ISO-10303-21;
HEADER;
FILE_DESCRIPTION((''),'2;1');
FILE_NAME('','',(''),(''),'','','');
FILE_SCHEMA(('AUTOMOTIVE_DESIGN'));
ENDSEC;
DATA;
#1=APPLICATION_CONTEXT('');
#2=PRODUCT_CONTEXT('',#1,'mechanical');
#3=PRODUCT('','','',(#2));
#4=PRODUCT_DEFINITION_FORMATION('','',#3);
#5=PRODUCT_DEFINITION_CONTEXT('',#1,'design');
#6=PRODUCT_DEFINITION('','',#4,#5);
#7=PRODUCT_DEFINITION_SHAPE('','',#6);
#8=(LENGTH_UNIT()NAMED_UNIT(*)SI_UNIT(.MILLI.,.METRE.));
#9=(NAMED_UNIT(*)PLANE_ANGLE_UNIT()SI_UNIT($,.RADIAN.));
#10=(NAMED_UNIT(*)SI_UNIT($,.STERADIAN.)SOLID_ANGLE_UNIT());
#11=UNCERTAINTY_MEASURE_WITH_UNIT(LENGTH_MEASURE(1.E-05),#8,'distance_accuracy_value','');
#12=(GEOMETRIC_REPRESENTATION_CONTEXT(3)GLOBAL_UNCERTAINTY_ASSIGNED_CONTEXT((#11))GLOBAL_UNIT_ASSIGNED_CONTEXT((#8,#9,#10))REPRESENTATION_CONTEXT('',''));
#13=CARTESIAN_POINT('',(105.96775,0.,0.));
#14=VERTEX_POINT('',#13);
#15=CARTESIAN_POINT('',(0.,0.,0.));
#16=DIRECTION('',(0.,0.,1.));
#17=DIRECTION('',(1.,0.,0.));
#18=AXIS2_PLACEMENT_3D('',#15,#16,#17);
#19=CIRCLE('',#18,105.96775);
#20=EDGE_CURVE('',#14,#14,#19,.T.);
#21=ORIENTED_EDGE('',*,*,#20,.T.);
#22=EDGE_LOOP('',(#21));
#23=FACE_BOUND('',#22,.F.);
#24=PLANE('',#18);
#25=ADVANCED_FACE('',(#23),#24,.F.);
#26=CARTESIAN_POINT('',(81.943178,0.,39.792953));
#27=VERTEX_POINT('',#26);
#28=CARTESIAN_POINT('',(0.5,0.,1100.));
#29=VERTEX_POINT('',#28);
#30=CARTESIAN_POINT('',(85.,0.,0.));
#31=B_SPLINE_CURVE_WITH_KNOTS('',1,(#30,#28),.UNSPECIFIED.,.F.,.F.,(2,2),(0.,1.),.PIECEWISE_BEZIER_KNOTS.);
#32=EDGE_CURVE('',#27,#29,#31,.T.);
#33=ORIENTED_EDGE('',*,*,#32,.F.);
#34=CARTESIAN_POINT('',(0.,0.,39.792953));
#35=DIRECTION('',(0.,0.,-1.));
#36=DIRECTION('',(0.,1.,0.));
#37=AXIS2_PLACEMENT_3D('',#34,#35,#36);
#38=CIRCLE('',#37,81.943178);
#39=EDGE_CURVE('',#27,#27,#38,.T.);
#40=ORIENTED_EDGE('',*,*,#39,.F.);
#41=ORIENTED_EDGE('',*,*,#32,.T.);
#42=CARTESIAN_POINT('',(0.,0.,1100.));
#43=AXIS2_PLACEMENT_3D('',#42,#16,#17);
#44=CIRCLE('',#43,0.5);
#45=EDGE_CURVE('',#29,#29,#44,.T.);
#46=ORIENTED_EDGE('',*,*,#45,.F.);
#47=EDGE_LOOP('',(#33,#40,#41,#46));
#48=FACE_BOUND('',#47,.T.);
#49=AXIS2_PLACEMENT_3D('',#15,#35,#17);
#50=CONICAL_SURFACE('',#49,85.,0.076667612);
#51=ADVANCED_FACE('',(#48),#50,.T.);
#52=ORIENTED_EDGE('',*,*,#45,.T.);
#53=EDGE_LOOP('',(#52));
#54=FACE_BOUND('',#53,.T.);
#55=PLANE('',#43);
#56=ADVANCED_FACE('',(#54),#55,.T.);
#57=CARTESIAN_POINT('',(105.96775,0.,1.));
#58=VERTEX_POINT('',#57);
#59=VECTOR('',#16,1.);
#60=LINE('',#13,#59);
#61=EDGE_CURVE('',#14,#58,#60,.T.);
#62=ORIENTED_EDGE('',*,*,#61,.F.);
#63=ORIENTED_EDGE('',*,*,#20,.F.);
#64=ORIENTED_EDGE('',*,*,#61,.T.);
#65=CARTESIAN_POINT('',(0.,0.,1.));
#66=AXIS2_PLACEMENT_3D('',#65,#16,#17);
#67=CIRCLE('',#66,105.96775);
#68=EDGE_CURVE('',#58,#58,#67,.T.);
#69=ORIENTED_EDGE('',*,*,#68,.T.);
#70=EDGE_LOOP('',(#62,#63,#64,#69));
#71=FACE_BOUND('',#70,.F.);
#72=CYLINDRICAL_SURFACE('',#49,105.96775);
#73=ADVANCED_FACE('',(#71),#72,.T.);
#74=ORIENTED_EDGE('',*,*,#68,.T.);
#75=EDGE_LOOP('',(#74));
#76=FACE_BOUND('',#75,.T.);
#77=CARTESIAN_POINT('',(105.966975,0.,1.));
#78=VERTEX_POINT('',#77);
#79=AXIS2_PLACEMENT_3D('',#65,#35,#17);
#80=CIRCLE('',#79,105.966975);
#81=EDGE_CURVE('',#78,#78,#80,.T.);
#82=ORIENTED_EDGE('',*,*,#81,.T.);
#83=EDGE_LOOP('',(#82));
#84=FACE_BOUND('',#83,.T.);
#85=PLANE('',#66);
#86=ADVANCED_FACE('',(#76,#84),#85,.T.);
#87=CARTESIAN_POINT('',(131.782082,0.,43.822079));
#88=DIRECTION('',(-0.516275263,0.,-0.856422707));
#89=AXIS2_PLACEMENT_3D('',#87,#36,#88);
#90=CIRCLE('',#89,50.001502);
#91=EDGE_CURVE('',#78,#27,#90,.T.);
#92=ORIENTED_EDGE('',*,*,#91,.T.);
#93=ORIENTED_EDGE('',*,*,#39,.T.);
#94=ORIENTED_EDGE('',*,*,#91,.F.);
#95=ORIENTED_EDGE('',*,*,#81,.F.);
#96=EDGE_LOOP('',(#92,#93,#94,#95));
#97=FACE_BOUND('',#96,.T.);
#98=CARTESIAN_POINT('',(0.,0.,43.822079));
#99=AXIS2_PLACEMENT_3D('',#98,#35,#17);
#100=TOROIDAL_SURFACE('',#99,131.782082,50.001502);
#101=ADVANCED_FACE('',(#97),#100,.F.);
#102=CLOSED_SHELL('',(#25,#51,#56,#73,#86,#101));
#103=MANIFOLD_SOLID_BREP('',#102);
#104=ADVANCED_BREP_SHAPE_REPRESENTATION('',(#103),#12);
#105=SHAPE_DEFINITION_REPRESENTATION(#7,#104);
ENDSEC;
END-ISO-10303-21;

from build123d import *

# Parameters (mm, degrees)
F0_R     = 85
F2_R     = 0.5
F4_R     = 105.9677495378
F5_DEPTH = 1


# Not quite as in the source:
# - a fillet or chamfer that OpenCascade refuses, or shapes differently, is made with other operations: its cross-section is extruded or revolved along the edge and cut away or added


with BuildPart() as f3:
    # F0 (on Top) → F3 section 0
    with BuildSketch(Plane.XY):
        Circle(F0_R)
    # F2 (on offset) → F3 section 1
    with BuildSketch(Plane.XY.offset(1100)):
        Circle(F2_R)
    loft()

    # F4 (on Top) → F5 (join)
    with BuildSketch(Plane.XY):
        Circle(F4_R)
    extrude(amount=F5_DEPTH)

    # F6: fillet of radius 50 on 1 edges, made by hand


with BuildPart() as f6_tool2:
    # F6_s3 → F6_t4 (revolve)
    with BuildSketch(Plane.XZ):
        with BuildLine():
            ThreePointArc((105.9675430277, 0.9996574309), (89.2196248611, 17.5811287524), (81.9274601503, 39.9923377321))
            Line((81.9274601503, 39.9923377321), (76.9419980029, 39.6093635944))
            ThreePointArc((76.9419980029, 39.6093635944), (78.4400582493, 20.1132100469), (79.9377196708, 0.6170258623))
            Line((79.9377196708, 0.6170258623), (84.9231818182, -4.0001501991))
            ThreePointArc((84.9231818182, -4.0001501991), (95.4453624229, -4.0001501991), (103.386089168, -3.2825847369))
            Line((103.386089168, -3.2825847369), (105.9675430277, 0.9996574309))
        make_face()
    revolve(axis=Axis((0, 0, 1), (0, 0, 1)))

    split(bisect_by=Plane.XY, keep=Keep.TOP)


with BuildPart() as f3_1:
    add(f3.part)

    # F6_t1: union F6_tool2
    add(f6_tool2.part)


solid = f3_1.part
